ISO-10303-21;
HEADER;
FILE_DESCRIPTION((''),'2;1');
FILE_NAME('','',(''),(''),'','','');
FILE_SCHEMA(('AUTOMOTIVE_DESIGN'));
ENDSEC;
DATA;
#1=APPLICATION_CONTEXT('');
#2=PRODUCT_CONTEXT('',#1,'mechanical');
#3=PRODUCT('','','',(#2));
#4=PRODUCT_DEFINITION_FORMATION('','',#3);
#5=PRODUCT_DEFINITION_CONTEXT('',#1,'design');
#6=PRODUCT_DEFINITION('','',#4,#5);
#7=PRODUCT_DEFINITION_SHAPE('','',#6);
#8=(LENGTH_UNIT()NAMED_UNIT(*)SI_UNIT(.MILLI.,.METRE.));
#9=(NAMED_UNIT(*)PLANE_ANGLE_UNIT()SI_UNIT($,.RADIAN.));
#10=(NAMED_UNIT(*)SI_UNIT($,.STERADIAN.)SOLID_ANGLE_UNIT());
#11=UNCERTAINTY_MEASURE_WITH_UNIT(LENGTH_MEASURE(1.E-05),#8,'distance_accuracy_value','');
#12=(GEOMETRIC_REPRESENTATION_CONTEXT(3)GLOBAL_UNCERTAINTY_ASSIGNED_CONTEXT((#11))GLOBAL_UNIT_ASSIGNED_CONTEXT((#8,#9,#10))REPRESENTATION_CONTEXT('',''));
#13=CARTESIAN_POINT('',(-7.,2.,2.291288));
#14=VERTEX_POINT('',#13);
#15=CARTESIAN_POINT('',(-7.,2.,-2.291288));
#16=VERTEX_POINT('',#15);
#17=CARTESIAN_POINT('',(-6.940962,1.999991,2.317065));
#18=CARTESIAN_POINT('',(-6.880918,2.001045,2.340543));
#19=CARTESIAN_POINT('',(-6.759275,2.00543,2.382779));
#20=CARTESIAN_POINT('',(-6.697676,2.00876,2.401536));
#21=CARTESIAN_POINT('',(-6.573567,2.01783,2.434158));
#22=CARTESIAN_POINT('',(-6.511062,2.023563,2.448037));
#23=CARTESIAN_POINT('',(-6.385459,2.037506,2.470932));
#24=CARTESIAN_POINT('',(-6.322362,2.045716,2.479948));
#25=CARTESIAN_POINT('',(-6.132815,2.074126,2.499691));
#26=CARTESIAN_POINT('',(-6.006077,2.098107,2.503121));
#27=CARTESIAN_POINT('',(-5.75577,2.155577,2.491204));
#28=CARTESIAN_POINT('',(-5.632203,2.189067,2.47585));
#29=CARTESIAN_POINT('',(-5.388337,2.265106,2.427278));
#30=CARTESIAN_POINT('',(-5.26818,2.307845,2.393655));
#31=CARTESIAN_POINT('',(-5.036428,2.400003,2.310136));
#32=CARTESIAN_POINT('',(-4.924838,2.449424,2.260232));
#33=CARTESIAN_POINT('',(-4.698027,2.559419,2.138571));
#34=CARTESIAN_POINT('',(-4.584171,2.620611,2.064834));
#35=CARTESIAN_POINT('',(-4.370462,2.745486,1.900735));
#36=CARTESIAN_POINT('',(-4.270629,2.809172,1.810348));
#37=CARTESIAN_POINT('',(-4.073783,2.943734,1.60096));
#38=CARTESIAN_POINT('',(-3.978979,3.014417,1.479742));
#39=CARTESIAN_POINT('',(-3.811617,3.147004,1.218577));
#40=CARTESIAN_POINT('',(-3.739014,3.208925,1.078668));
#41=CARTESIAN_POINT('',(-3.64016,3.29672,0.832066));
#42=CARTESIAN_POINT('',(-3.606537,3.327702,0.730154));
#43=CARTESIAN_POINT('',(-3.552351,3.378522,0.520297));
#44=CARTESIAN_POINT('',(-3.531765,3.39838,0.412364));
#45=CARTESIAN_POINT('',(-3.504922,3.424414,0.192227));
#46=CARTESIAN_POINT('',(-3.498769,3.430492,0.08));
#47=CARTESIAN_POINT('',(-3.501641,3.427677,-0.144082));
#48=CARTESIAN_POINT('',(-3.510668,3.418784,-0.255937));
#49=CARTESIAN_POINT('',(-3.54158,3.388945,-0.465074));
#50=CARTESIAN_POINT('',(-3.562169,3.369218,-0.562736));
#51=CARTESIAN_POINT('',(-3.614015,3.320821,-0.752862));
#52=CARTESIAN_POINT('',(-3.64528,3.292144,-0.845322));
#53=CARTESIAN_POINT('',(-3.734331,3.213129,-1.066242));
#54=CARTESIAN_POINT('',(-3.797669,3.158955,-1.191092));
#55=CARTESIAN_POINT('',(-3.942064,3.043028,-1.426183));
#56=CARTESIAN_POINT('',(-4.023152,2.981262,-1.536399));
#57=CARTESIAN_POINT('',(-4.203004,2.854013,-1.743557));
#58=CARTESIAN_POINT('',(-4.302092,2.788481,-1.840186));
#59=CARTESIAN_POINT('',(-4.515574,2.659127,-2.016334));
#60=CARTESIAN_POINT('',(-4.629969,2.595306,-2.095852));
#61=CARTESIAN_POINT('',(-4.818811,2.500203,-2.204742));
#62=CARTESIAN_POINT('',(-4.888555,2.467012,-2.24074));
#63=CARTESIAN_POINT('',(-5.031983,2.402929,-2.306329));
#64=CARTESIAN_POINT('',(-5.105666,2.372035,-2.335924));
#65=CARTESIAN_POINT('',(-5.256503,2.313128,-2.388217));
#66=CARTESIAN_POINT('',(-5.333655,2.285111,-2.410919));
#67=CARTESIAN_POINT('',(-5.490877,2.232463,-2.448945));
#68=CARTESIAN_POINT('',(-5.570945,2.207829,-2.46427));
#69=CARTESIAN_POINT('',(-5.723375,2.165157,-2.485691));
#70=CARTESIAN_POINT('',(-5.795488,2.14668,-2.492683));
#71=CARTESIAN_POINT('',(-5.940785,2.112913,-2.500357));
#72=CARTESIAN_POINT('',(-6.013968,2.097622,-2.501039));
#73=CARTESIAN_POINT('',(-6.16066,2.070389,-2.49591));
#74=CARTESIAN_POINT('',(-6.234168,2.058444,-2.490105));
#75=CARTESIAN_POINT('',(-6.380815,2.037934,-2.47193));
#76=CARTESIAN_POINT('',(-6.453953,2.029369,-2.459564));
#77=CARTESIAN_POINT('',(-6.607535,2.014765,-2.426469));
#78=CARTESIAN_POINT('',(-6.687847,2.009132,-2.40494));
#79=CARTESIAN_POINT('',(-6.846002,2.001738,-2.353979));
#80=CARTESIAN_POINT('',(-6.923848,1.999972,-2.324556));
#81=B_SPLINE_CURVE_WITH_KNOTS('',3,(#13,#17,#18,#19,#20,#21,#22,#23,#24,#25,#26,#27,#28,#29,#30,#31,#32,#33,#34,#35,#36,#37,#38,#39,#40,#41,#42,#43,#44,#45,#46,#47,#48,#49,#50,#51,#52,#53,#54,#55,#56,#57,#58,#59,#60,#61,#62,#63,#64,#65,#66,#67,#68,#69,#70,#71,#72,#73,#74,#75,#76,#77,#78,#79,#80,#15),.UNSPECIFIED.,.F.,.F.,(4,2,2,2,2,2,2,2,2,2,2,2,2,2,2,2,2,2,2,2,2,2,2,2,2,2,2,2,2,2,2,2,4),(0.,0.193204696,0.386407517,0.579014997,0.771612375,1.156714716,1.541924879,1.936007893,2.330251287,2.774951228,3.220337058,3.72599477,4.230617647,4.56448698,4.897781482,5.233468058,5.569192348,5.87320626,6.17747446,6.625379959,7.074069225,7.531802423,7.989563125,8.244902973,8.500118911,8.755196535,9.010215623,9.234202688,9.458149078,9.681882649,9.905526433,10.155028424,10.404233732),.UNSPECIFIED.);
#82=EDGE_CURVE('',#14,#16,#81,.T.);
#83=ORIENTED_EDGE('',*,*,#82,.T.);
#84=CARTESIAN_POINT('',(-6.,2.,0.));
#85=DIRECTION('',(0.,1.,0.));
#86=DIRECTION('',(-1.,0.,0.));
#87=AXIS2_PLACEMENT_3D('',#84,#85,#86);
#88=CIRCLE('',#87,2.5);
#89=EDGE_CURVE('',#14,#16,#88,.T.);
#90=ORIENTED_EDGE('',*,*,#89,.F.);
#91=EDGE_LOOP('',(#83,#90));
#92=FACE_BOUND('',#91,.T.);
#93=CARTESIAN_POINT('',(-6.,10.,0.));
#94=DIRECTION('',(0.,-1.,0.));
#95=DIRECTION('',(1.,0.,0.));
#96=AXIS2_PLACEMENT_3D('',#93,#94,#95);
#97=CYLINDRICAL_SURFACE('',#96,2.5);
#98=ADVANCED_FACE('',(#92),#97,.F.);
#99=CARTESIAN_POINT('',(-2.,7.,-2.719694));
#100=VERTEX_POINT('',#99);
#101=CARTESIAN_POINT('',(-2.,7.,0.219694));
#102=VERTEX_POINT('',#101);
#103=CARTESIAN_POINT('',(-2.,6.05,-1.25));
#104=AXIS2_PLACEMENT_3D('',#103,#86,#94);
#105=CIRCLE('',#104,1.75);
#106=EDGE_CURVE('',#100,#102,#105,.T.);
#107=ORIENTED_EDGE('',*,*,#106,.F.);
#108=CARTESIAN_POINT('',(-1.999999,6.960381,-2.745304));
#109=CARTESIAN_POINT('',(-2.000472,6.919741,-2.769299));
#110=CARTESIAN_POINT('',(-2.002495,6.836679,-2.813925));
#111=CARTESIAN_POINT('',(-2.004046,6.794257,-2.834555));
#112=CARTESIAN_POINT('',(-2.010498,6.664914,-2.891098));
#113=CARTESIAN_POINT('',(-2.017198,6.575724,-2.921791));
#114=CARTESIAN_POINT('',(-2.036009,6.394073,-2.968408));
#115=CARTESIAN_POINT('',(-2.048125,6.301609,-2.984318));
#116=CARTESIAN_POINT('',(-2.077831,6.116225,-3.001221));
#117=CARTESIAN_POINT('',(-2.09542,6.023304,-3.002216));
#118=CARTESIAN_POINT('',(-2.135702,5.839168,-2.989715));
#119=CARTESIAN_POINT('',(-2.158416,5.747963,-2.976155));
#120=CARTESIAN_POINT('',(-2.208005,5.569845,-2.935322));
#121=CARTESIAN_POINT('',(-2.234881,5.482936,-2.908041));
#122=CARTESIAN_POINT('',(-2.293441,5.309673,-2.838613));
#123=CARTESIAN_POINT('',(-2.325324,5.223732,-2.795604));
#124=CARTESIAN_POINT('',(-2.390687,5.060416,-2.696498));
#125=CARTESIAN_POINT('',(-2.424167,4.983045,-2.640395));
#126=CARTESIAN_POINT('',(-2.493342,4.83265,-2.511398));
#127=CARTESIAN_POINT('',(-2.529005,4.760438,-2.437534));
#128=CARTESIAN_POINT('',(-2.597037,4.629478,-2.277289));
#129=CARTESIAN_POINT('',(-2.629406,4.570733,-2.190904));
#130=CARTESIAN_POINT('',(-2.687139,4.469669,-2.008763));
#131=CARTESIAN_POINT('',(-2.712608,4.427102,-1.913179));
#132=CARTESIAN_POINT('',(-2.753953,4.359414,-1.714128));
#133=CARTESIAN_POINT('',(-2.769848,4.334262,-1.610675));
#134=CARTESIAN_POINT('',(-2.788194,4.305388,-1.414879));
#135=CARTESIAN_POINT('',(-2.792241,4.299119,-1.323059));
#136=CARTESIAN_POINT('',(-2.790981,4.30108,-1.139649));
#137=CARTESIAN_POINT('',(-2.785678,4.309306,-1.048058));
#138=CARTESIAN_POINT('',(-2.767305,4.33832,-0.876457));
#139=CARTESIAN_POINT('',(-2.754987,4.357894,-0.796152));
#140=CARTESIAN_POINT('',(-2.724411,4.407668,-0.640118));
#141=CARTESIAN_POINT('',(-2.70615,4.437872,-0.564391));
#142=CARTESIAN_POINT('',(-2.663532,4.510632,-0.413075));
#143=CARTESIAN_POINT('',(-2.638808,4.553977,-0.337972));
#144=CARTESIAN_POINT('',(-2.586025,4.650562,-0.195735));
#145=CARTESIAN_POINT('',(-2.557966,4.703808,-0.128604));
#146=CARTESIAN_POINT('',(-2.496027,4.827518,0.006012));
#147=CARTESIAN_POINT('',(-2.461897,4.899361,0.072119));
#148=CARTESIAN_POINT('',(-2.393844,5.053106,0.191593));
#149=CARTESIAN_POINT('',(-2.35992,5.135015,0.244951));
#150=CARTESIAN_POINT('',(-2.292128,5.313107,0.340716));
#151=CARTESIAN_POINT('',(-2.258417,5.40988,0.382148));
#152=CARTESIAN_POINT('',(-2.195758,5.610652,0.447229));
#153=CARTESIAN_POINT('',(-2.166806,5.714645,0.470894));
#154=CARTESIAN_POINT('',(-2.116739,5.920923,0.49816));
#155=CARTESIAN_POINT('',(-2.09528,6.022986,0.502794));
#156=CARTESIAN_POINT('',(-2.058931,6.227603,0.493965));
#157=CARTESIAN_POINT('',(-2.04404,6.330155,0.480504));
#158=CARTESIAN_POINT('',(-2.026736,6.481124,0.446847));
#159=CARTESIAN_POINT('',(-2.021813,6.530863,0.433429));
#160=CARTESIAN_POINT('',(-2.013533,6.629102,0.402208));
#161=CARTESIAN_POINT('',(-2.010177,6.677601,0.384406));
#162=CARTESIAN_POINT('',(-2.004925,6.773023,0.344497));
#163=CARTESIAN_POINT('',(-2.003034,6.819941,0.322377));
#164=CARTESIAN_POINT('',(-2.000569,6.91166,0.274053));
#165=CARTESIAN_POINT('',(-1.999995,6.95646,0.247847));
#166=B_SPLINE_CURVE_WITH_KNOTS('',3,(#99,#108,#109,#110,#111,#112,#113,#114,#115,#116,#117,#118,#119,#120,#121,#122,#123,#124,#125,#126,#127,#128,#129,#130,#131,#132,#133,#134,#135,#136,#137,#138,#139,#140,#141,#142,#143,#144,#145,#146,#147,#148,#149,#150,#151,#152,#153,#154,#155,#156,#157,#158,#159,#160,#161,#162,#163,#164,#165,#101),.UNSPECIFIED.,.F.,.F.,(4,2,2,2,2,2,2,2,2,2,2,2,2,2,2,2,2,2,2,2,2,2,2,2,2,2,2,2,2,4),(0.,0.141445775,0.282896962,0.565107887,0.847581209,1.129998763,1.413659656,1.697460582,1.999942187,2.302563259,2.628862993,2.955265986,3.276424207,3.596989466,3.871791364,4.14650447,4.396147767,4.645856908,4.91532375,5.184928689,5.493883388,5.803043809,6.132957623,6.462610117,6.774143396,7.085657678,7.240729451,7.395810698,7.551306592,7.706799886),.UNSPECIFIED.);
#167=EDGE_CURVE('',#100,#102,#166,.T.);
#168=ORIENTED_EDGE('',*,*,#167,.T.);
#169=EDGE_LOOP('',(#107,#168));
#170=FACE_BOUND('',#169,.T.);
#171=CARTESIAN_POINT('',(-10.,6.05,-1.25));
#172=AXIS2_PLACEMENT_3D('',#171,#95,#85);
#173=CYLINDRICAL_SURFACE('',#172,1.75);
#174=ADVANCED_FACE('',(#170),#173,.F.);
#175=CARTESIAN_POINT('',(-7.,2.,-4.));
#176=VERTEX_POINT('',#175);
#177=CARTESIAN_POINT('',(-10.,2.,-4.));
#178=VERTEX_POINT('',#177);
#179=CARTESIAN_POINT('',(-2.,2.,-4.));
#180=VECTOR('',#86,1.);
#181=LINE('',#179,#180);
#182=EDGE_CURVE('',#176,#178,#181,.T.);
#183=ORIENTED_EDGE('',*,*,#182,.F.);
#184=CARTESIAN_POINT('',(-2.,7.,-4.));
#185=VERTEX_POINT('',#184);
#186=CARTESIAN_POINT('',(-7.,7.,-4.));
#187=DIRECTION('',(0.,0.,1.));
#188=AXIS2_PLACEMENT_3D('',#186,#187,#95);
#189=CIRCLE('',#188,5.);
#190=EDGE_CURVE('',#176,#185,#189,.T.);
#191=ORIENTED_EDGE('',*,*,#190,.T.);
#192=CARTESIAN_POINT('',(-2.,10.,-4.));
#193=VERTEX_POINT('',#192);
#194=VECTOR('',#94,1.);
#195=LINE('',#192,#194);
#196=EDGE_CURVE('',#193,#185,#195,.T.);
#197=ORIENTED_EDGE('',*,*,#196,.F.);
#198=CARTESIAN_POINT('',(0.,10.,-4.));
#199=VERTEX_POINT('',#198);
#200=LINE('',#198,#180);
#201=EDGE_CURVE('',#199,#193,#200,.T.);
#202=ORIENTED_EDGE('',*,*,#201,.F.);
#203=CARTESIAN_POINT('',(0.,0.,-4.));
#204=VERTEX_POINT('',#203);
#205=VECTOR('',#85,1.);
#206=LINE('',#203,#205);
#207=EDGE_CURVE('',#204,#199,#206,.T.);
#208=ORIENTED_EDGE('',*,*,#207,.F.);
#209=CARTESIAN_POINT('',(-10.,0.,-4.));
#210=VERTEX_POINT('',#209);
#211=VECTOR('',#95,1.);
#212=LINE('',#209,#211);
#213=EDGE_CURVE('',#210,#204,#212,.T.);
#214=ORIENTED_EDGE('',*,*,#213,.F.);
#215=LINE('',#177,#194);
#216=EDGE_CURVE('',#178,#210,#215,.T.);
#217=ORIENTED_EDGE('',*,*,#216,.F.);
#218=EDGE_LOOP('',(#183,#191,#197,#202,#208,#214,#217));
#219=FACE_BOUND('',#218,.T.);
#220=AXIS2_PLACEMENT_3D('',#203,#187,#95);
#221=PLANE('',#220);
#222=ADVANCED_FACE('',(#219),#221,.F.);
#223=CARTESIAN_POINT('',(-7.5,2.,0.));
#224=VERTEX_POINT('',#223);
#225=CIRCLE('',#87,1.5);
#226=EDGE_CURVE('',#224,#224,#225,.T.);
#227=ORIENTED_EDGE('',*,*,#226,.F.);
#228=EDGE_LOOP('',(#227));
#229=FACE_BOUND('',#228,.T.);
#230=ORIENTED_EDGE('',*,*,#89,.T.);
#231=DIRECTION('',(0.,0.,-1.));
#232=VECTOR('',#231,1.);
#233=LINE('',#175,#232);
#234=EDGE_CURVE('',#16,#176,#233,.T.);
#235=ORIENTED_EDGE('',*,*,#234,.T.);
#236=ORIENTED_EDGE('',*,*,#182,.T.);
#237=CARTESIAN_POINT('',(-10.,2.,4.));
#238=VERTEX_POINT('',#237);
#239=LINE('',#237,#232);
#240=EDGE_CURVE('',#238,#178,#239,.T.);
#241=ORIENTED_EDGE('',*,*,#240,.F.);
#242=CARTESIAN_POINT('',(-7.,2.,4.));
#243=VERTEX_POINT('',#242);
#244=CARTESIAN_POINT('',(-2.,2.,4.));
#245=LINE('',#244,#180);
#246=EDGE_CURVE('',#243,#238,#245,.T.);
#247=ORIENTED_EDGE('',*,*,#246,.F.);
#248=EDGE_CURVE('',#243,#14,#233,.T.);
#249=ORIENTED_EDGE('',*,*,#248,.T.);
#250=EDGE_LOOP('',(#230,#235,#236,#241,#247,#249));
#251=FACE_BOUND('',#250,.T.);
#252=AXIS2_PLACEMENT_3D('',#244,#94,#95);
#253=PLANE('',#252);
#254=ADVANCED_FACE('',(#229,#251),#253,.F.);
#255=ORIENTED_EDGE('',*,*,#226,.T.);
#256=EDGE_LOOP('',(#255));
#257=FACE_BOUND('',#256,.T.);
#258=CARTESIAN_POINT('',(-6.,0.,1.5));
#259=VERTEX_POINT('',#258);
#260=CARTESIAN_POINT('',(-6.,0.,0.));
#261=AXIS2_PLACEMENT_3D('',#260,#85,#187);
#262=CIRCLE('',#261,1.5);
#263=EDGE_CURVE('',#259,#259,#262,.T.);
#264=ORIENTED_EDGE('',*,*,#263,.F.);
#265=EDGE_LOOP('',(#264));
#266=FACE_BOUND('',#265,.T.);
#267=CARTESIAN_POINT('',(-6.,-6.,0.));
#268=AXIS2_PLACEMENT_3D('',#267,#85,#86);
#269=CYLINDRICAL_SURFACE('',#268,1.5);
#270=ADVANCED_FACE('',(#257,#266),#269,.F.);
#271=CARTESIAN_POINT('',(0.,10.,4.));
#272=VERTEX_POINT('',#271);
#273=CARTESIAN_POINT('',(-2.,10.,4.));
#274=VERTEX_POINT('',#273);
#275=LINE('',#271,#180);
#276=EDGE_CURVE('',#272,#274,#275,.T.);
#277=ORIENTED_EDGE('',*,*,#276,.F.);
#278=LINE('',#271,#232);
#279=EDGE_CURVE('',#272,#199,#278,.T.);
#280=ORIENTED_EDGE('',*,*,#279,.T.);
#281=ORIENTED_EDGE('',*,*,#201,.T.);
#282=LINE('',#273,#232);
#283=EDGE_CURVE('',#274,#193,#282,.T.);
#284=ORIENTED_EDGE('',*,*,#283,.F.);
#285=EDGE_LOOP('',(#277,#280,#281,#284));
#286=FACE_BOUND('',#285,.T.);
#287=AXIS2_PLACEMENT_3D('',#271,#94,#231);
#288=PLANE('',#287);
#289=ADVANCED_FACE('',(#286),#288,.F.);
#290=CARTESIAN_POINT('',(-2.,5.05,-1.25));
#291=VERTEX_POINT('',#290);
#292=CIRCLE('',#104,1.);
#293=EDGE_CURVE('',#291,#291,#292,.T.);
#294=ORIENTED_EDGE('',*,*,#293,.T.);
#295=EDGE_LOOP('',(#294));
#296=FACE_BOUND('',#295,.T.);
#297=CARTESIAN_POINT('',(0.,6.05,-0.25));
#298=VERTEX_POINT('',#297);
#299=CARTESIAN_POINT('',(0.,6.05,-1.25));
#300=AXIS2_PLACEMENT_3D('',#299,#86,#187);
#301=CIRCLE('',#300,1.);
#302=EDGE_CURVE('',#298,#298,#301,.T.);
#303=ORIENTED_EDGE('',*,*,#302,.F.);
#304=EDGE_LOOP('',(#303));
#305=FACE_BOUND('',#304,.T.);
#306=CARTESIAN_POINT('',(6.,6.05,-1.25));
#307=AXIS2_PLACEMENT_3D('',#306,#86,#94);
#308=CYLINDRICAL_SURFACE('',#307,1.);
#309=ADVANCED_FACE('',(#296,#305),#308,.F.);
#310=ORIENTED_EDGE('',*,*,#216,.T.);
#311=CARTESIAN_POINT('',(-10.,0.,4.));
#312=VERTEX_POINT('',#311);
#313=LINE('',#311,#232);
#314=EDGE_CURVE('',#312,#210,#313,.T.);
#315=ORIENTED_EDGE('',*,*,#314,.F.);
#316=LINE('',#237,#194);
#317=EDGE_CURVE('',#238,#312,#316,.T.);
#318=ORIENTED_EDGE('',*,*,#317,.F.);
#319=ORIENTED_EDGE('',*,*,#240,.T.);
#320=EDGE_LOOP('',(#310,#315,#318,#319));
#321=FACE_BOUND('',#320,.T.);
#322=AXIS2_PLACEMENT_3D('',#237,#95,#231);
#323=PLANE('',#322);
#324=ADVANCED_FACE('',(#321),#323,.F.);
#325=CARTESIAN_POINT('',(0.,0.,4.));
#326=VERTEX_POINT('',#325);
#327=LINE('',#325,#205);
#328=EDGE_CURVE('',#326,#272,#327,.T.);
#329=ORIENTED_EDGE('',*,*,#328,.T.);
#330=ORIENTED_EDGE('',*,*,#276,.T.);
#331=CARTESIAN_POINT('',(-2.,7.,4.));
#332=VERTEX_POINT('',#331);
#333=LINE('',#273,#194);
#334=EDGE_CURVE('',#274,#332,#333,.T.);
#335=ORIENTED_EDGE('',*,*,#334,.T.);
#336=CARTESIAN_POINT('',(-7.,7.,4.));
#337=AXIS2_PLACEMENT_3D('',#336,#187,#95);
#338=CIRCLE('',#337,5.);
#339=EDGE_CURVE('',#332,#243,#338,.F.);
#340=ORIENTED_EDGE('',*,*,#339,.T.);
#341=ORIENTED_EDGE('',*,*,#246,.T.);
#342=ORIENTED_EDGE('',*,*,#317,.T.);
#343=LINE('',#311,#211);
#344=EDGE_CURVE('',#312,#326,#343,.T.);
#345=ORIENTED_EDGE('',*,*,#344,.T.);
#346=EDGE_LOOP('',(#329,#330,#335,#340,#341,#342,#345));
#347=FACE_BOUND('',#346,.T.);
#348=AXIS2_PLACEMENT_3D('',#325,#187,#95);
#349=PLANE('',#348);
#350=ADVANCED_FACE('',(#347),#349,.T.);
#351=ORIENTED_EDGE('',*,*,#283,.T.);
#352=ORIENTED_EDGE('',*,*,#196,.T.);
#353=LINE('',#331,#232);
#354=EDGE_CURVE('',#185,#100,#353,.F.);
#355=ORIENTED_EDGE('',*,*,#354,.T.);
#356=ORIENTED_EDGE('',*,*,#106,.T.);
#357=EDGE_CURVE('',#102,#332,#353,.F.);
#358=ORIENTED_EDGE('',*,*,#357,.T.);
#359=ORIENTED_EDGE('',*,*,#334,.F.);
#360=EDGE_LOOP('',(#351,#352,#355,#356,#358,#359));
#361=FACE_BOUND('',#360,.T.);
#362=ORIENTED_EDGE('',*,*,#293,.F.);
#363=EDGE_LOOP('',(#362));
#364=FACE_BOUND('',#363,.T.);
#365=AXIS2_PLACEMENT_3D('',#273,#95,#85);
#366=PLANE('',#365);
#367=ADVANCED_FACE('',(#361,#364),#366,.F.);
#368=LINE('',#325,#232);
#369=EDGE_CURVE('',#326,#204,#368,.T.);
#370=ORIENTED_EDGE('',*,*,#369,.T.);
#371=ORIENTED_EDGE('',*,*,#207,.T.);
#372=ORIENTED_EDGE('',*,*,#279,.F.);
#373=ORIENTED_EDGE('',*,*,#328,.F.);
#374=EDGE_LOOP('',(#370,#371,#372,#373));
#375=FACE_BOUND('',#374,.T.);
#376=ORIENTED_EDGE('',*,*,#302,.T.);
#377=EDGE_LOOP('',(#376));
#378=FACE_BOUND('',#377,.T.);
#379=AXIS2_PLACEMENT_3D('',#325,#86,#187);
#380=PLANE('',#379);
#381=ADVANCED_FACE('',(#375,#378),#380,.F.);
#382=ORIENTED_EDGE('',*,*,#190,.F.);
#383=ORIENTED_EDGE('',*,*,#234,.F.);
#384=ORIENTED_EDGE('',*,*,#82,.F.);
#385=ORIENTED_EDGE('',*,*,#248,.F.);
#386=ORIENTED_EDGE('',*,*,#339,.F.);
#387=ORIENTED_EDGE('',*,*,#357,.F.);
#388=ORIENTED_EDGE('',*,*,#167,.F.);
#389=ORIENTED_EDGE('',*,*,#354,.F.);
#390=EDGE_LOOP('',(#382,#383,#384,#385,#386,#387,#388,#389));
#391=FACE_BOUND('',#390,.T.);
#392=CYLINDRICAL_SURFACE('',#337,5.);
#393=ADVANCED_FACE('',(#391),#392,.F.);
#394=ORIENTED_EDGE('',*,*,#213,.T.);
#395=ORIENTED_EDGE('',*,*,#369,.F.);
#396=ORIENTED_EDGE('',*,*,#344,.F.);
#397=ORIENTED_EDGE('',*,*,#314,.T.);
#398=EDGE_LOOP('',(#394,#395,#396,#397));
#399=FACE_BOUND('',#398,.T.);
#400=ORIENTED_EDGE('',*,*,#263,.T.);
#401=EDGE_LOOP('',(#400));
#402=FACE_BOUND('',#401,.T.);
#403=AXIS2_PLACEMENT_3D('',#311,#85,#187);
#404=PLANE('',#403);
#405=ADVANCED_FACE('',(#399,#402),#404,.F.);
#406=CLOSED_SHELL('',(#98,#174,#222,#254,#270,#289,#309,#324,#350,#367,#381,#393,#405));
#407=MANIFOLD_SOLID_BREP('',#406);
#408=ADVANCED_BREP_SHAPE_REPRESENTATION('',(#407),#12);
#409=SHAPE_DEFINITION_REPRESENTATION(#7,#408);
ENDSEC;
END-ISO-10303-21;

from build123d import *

# Parameters (mm, degrees)
BOSS_EXTRUDE1_DEPTH = 4
SKETCH2_R           = 1.5
CUT_EXTRUDE1_DEPTH  = 8
SKETCH3_R           = 1
CUT_EXTRUDE2_DEPTH  = 8
FILLET1_R           = 5
SKETCH4_R           = 2.5
CUT_EXTRUDE3_DEPTH  = 8
SKETCH5_R           = 1.75
CUT_EXTRUDE4_DEPTH  = 8


with BuildPart() as part:
    # Sketch1 → Boss-Extrude1 (new, symmetric)
    with BuildSketch(Plane.XY):
        Polygon((-10, 0), (0, 0), (0, 10), (-2, 10), (-2, 2), (-10, 2), align=None)
    extrude(amount=BOSS_EXTRUDE1_DEPTH, both=True)

    # Sketch2 → Cut-Extrude1 (cut)
    with BuildSketch(Plane(origin=(0, 2, 0), x_dir=(1, 0, 0), z_dir=(0, 1, 0))):
        with Locations(Location((-6, 0, 0), (0, 0, 180))):
            Circle(SKETCH2_R)
    extrude(amount=-CUT_EXTRUDE1_DEPTH, mode=Mode.SUBTRACT)

    # Sketch3 → Cut-Extrude2 (cut)
    with BuildSketch(Plane.ZY.offset(2)):
        with Locations(Location((-1.25, 6.05, 0), (0, 0, 270))):
            Circle(SKETCH3_R)
    extrude(amount=-CUT_EXTRUDE2_DEPTH, mode=Mode.SUBTRACT)

    # Fillet1
    # the kernel refuses this fillet: 5 mm, written as the material it adds along each edge
    with BuildSketch(Plane(origin=(-2, 2, 4), x_dir=(0, 1, 0), z_dir=(0, 0, -1))) as fillet1_piece_1_section:
        with BuildLine():
            CenterArc((FILLET1_R, -FILLET1_R), FILLET1_R, 90, 90)
            Line((0, -FILLET1_R), (0, 0))
            Line((0, 0), (FILLET1_R, 0))
        make_face()
    fillet1_piece_1 = extrude(amount=8, mode=Mode.PRIVATE)
    fillet1_piece_1 = fillet1_piece_1 - Plane(origin=(-6, 3.13209962, 0), x_dir=(-1, 0, 0), z_dir=(0, 1, 0)) * Cylinder(1.5, 36, mode=Mode.PRIVATE)
    fillet1_piece_1 = fillet1_piece_1 - Plane(origin=(-3.062165259, 6.05, -1.25), x_dir=(0, -1, 0), z_dir=(-1, 0, 0)) * Cylinder(1, 36, mode=Mode.PRIVATE)
    add(fillet1_piece_1)

    # Sketch4 → Cut-Extrude3 (cut)
    with BuildSketch(Plane(origin=(0, 2, 0), x_dir=(1, 0, 0), z_dir=(0, 1, 0))):
        with Locations((-6, 0)):
            Circle(SKETCH4_R)
    extrude(amount=CUT_EXTRUDE3_DEPTH, mode=Mode.SUBTRACT)

    # Sketch5 → Cut-Extrude4 (cut)
    with BuildSketch(Plane.ZY.offset(2)):
        with Locations((-1.25, 6.05)):
            Circle(SKETCH5_R)
    extrude(amount=CUT_EXTRUDE4_DEPTH, mode=Mode.SUBTRACT)


solid = part.part
